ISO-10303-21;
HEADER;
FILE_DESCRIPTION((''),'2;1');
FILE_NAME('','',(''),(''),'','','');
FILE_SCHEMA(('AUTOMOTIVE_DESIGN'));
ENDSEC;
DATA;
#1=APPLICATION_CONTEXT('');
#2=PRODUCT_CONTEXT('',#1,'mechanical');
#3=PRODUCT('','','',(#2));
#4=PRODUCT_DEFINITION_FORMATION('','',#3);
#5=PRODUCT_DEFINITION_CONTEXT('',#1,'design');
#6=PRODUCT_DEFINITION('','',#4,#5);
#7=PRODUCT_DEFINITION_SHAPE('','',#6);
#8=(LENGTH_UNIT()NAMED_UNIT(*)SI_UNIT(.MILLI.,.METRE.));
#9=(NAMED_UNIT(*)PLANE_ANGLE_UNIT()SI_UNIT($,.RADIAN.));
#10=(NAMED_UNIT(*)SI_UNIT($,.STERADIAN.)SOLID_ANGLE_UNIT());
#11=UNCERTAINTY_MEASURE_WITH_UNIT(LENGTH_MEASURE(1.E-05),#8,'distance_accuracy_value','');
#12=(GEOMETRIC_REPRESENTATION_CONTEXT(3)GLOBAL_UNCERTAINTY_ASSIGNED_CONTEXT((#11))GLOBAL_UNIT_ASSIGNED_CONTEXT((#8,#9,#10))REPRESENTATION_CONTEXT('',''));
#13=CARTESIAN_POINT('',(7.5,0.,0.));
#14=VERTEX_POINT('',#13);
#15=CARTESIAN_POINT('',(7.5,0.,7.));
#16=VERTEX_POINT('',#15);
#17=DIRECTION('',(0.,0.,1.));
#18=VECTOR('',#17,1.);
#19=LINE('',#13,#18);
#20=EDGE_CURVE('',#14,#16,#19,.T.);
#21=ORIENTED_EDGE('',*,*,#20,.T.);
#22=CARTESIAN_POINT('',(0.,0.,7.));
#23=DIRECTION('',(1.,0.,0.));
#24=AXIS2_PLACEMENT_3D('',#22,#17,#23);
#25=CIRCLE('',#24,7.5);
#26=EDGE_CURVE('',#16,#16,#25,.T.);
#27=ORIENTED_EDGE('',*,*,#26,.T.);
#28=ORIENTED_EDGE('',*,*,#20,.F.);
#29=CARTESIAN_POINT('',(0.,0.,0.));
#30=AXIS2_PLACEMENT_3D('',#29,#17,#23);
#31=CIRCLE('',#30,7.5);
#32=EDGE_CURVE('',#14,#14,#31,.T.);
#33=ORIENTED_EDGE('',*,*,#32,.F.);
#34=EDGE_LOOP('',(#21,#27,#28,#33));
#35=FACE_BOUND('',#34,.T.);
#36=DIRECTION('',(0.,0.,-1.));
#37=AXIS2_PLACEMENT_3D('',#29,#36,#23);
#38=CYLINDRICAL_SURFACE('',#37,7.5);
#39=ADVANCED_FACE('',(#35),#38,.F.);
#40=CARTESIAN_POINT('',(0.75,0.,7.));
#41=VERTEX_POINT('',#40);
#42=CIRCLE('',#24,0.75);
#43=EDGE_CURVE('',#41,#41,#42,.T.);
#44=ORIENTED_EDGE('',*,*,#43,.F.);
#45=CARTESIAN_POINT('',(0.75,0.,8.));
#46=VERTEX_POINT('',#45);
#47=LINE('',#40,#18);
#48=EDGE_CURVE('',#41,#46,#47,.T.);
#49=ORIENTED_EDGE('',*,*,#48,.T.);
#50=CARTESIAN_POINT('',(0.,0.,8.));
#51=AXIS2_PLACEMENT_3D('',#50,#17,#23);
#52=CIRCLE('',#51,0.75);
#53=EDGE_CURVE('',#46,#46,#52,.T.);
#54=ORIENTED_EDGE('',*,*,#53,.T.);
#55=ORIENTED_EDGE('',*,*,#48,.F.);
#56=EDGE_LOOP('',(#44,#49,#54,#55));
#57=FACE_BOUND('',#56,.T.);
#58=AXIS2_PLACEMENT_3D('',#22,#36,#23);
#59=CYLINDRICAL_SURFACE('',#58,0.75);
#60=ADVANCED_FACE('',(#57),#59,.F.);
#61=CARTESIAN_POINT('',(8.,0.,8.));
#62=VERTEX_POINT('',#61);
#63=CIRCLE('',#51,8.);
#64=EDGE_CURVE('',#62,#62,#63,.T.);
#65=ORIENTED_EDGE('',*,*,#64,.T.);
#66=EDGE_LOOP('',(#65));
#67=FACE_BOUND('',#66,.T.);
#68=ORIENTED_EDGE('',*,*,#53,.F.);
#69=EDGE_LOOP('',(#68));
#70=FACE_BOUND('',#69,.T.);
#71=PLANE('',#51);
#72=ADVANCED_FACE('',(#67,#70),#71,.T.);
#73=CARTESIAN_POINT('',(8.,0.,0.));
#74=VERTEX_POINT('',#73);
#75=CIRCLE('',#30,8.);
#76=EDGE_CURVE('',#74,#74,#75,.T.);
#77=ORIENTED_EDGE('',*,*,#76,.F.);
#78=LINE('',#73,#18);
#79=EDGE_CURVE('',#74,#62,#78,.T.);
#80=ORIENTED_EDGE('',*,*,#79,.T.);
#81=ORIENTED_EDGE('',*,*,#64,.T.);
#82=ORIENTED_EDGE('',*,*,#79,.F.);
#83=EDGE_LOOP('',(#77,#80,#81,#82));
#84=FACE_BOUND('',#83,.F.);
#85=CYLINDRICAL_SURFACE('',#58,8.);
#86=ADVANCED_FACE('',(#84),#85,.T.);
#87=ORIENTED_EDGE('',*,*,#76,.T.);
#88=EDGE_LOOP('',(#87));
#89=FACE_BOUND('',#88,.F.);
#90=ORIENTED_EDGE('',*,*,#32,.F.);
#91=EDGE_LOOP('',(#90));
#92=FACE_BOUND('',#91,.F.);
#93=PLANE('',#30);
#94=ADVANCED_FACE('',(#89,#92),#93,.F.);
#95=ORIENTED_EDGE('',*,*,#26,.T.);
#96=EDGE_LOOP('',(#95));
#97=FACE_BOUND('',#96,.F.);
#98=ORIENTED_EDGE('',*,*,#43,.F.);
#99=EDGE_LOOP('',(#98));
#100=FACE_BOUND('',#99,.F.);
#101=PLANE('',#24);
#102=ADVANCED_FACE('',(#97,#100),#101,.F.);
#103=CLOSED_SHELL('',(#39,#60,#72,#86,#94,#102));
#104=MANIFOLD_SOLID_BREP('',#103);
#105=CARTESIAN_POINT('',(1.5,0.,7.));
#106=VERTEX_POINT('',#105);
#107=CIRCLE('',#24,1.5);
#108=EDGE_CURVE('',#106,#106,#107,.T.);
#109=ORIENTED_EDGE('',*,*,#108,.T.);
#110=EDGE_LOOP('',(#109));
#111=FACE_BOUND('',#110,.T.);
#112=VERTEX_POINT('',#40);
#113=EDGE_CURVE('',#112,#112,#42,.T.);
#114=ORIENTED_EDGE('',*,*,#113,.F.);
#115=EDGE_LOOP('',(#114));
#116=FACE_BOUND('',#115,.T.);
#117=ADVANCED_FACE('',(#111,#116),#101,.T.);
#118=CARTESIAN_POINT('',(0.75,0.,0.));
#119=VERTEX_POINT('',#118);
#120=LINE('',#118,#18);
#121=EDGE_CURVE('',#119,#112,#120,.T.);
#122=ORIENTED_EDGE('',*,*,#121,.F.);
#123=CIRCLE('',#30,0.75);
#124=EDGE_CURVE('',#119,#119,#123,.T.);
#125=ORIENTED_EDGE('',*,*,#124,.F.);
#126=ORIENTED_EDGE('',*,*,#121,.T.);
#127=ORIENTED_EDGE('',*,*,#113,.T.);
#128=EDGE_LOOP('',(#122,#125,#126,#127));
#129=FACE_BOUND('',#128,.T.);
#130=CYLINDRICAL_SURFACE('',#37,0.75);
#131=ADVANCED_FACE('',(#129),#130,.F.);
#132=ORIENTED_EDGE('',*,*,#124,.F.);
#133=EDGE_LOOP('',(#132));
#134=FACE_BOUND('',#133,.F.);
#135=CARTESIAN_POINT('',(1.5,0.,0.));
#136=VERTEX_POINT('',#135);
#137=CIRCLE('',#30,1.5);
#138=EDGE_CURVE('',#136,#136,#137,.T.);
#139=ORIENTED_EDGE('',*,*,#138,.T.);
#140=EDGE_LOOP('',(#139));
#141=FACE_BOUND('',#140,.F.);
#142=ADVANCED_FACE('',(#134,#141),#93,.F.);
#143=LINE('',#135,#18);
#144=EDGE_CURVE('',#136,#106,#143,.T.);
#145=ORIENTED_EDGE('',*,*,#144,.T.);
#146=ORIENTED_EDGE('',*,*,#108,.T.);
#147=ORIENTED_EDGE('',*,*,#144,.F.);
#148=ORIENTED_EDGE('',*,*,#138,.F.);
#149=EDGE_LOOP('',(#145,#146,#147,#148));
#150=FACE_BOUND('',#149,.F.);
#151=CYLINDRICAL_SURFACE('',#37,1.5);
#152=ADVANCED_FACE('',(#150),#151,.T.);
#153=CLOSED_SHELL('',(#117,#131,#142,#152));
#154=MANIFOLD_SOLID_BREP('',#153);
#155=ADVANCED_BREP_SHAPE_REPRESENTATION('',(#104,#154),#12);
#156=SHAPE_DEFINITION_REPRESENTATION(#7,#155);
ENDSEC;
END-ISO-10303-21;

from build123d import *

# Parameters (mm, degrees)
F0_R     = 1.5
F0_R_2   = 0.75
F1_DEPTH = 7
F0_R_3   = 8
F0_R_4   = 7.5
F2_R     = 8
F2_R_2   = 1.5
F2_R_3   = 0.75
F3_DEPTH = 1


with BuildPart() as f1:
    # F0 (on Top) → F1 (new body)
    with BuildSketch(Plane.XY):
        Circle(F0_R)
        Circle(F0_R_2, mode=Mode.SUBTRACT)
    extrude(amount=F1_DEPTH)


with BuildPart() as f1b:
    # F0 (on Top) → F1, piece 2 (new body)
    with BuildSketch(Plane.XY):
        Circle(F0_R_3)
        Circle(F0_R_4, mode=Mode.SUBTRACT)
    extrude(amount=F1_DEPTH)

    # F2 (on face) → F3 (join)
    with BuildSketch(Plane.XY.offset(7)):
        Circle(F2_R)
        Circle(F2_R_2, mode=Mode.SUBTRACT)
        Circle(F2_R_2)
        Circle(F2_R_3, mode=Mode.SUBTRACT)
    extrude(amount=F3_DEPTH)


solid = Compound([f1.part, f1b.part])
